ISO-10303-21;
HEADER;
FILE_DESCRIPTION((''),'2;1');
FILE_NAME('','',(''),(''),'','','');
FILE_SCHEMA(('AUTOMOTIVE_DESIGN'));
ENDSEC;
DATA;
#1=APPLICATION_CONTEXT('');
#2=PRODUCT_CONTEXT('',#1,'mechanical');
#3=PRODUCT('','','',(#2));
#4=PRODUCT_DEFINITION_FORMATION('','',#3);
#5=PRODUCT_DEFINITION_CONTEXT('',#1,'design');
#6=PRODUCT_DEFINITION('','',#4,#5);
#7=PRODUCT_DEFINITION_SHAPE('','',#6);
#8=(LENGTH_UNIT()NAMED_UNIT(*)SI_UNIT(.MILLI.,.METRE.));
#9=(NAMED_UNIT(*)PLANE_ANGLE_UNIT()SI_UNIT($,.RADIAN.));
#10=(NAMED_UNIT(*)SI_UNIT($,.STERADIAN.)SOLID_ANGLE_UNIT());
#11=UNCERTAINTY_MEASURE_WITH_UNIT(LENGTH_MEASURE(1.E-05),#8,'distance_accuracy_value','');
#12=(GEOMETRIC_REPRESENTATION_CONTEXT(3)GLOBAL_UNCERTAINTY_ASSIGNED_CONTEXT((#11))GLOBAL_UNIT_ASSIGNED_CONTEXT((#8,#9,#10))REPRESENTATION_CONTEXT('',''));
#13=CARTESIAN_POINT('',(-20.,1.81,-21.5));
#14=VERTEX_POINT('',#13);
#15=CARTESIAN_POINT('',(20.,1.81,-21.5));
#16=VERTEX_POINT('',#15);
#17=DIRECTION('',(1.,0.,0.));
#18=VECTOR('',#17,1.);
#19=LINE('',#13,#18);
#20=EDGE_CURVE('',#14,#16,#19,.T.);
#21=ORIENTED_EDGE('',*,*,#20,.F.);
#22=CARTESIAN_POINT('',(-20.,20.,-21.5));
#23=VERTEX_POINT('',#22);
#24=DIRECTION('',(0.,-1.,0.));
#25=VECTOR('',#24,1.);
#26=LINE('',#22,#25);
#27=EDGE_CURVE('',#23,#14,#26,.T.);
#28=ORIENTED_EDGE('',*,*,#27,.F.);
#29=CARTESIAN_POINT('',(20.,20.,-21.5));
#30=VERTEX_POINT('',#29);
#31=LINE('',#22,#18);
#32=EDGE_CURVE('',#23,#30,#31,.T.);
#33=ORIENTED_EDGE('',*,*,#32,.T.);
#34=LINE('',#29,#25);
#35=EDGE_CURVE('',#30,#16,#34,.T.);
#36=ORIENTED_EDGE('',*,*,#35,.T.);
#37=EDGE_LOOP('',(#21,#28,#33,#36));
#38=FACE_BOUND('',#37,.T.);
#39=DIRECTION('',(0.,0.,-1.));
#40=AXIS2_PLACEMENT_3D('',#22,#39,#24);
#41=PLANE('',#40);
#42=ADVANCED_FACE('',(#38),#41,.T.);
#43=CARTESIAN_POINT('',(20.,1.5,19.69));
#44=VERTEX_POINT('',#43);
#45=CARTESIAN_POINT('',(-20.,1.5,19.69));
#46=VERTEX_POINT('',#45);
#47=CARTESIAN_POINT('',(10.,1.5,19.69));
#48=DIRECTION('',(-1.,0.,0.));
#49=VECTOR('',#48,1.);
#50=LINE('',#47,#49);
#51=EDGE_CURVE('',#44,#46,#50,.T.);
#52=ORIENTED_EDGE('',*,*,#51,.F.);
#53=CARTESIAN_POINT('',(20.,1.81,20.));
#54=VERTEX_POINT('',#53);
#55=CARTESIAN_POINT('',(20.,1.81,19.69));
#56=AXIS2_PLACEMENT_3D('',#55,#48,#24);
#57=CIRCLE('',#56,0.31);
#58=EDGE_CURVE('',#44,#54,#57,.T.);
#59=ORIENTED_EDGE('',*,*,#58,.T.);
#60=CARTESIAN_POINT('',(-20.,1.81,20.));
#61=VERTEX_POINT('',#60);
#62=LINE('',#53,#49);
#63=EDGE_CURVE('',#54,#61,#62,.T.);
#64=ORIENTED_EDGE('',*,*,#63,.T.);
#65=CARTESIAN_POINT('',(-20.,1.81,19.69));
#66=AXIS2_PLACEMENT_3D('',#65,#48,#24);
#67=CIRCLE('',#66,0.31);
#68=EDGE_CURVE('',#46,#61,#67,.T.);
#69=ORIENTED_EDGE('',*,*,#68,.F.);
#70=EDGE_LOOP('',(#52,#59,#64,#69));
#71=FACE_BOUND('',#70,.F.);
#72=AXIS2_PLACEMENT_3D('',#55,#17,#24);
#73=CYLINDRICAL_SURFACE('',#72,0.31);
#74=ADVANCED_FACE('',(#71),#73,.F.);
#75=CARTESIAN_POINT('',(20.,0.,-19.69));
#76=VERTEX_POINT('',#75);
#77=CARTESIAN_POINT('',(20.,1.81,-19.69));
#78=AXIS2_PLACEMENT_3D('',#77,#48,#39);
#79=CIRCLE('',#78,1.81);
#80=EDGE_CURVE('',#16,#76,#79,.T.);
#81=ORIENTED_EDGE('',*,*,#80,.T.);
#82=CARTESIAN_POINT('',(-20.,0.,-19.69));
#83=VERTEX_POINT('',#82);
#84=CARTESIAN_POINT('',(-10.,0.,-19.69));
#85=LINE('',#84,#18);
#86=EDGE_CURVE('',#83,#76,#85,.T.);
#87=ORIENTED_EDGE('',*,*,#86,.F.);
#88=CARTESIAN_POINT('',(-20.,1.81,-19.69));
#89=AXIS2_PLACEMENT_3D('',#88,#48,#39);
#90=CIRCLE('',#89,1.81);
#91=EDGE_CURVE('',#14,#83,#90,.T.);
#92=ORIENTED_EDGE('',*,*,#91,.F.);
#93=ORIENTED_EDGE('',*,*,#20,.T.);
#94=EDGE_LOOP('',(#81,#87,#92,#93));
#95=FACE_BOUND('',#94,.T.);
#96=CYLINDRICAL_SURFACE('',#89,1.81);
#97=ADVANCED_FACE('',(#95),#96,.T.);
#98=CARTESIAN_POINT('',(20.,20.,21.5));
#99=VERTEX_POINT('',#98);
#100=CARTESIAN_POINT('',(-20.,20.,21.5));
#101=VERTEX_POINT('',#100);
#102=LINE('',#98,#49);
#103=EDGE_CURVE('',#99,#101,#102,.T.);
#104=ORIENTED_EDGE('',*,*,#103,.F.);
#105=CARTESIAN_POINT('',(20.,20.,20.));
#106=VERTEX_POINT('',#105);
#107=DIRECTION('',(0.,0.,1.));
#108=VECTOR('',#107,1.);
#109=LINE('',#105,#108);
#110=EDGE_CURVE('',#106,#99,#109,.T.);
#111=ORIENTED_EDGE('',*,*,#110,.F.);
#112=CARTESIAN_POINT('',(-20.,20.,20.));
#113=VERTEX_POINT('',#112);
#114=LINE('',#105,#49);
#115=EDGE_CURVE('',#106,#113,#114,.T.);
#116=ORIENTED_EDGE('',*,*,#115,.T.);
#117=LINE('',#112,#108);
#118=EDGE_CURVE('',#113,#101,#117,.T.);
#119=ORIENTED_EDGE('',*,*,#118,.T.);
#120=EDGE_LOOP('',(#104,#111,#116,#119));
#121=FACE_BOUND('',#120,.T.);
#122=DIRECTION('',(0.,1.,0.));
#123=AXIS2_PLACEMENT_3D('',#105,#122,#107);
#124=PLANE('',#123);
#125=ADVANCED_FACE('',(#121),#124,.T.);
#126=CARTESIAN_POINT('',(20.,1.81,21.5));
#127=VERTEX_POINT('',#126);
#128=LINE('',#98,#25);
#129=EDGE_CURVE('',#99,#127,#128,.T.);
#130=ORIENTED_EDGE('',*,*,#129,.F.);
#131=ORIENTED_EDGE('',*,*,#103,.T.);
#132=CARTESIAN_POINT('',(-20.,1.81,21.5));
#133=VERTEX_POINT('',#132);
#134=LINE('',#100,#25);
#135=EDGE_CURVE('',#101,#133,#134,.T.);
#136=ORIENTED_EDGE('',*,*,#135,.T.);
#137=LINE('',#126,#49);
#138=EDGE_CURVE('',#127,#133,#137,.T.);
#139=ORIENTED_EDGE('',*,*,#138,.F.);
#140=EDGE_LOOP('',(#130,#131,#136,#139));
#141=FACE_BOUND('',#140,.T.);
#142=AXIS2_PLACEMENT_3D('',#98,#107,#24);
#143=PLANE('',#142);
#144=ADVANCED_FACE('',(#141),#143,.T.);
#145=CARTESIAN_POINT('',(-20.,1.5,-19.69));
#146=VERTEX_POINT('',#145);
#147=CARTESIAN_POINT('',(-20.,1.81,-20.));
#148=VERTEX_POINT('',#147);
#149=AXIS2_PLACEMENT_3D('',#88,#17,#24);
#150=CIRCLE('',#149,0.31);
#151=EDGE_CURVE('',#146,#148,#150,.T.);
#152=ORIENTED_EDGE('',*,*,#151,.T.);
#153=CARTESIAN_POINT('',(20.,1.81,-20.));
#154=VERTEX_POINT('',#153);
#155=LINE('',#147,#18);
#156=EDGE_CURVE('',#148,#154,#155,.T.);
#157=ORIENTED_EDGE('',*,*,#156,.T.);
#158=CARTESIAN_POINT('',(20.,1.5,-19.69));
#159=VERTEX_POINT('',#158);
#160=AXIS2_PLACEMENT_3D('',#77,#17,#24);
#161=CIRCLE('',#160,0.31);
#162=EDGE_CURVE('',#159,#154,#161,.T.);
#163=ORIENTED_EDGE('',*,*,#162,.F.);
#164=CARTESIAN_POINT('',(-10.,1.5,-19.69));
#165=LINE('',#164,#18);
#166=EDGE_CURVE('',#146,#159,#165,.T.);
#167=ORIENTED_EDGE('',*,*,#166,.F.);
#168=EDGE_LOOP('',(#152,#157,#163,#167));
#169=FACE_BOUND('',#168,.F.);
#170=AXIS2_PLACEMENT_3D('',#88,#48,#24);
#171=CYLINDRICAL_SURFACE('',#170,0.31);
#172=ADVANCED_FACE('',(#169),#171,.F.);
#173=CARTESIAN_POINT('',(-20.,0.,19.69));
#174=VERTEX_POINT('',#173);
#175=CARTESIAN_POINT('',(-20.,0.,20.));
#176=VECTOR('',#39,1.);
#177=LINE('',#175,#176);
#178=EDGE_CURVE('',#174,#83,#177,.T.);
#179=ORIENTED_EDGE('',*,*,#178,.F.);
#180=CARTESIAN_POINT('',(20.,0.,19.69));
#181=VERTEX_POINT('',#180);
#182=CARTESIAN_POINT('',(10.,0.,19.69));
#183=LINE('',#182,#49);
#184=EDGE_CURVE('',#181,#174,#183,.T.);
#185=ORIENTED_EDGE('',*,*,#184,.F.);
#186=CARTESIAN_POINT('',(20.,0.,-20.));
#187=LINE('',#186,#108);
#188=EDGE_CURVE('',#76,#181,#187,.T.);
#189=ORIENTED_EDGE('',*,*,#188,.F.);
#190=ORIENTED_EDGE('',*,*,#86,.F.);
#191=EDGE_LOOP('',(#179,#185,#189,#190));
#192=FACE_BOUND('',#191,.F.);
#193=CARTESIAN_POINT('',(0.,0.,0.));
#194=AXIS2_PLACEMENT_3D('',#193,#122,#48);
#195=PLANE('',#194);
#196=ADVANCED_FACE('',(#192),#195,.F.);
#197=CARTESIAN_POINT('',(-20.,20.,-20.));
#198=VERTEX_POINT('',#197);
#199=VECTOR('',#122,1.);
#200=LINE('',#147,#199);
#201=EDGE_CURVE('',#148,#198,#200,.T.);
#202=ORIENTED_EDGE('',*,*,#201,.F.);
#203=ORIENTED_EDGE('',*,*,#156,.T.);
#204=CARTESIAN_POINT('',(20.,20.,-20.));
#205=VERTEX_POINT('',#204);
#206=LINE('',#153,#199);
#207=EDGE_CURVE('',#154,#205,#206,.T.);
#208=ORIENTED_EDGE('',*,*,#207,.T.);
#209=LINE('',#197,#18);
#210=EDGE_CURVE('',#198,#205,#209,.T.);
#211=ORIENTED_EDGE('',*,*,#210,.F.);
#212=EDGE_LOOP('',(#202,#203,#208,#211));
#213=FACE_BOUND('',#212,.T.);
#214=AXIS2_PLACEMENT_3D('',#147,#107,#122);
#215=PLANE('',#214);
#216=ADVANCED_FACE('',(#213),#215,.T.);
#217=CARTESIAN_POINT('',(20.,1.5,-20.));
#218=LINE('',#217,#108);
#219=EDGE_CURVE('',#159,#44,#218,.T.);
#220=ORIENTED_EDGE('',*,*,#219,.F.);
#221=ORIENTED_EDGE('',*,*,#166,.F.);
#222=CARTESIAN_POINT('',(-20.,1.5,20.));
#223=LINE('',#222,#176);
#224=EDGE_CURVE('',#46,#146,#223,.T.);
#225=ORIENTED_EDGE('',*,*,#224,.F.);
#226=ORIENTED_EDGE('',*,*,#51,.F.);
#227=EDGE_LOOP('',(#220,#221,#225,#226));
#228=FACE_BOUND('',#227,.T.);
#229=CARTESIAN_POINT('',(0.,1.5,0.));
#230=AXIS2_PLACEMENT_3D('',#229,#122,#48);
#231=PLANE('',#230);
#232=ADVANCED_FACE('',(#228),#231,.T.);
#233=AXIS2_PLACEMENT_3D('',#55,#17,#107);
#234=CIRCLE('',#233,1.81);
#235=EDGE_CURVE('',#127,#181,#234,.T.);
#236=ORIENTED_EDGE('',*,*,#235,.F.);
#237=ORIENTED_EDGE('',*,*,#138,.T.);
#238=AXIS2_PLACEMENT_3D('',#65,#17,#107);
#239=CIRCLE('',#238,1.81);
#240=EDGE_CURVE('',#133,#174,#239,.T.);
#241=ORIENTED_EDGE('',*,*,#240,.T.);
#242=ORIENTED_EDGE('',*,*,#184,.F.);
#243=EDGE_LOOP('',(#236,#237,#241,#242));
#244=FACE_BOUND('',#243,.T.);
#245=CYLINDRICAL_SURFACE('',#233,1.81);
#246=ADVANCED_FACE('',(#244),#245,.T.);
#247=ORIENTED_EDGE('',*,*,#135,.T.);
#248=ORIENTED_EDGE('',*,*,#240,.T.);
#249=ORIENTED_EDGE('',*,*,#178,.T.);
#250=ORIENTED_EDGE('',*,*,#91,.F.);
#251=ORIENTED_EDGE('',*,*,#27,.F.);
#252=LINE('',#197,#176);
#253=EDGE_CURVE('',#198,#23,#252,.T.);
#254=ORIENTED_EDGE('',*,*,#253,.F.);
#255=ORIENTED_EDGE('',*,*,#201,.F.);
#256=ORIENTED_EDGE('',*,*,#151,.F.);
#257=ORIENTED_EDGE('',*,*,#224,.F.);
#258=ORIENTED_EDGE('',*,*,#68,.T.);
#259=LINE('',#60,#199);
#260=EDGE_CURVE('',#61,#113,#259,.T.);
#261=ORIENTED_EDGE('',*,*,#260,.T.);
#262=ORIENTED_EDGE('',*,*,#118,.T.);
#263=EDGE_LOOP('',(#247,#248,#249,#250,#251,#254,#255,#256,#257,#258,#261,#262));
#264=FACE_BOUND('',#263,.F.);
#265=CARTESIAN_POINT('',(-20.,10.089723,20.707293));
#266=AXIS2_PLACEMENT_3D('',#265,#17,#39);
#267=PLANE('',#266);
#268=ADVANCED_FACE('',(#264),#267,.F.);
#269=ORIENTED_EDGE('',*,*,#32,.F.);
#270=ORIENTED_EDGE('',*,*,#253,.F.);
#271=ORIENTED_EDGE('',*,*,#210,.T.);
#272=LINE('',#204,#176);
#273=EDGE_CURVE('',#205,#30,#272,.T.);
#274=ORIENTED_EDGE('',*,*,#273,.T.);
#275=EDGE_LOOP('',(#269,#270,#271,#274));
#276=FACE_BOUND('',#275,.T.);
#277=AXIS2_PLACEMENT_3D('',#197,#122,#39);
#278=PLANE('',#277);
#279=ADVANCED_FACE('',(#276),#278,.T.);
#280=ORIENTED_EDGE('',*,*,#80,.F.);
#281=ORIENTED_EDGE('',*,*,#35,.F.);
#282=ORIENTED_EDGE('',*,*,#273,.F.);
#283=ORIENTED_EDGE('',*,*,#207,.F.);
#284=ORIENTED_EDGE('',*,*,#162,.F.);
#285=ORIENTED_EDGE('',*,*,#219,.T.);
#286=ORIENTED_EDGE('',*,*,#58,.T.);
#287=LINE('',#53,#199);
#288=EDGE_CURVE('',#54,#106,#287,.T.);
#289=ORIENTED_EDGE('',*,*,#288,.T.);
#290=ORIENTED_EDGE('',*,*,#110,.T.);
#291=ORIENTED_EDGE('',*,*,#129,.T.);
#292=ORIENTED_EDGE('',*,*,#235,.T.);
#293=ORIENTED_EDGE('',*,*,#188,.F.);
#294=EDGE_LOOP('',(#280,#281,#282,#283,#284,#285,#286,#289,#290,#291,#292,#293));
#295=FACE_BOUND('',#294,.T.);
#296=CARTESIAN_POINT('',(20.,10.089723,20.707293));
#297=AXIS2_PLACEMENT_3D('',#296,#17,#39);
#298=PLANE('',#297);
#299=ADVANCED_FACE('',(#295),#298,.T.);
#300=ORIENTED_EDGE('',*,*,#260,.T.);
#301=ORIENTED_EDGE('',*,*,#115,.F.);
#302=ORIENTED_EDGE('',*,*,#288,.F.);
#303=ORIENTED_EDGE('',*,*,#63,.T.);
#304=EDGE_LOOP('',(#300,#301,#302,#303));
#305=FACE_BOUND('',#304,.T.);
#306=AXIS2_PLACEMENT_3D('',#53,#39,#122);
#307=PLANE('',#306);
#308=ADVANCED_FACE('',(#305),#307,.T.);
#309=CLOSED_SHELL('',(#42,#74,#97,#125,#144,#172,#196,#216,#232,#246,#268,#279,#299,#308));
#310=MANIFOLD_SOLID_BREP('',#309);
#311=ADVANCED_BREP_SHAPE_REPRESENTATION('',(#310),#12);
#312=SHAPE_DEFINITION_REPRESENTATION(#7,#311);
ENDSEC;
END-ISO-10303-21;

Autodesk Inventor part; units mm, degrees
ref_plane "YZ Plane" through (0, 0, 0) normal (1, 0, 0) x (0, 1, 0)
ref_plane "XZ Plane" through (0, 0, 0) normal (0, 1, 0) x (-1, 0, 0)
ref_plane "XY Plane" through (0, 0, 0) normal (0, 0, 1) x (1, 0, 0)
sketch "Sketch1" plane through (0, 0, 0) normal (0, 1, 0) x (-1, 0, 0)
  line L0 (-20, 20) -> (20, 20)
  line L1 (20, 20) -> (20, -20)
  line L2 (20, -20) -> (-20, -20)
  line L3 (-20, -20) -> (-20, 20)
  line L4 (-20, 20) -> (20, -20) construction
  line L5 (20, 20) -> (-20, -20) construction
  point P0 (0, 0)
  dimension "d0" = 40
  dimension "d1" = 40
extrude "Plate1" add sketch "Sketch1" along normal blind 1.5
sketch "Sketch2" plane through (20, 0, 21.5) normal (0, 0, -1) x (-1, 0, 0)
  line L0 (40, 0) -> (0, 0)
  line L1 (0, 0) -> (0, 20)
  line L2 (0, 20) -> (40, 20)
  line L3 (40, 20) -> (40, 0)
edge flange "Flange1" height 20 angle 90 thickness 1.5 bend radius 0.31 thickness toward (0, 0, -1) relief tear relief width 1.5 relief depth 0.75 corner gap 0.31 corner form 0 edges at (0, 1.5, 20) (0, 1.5, -20) wall of the first edge with corners at (-20, 0, 21.5) (20, 0, 21.5) (20, 20, 21.5) (-20, 20, 21.5)
bend "Bend1"
corner "Corner1"
equation "\"d2\" = Thickness"
equation "\"d3\" = BendReliefWidth"
equation "\"d4\" = BendReliefDepth"
equation "\"d5\" = MinimumRemnant"
equation "\"d6\" = TransitionRadius"
equation "\"d9\" = BendRadius"
equation "\"d10\" = CornerReliefSize"
equation "\"d11\" = GapSize"
equation "\"d12\" = JacobiRadiusSize"
equation "\"BendReliefWidth\" = Thickness"
equation "\"BendReliefDepth\" = 0.5 * Thickness"
equation "\"CornerReliefSize\" = 4 * Thickness"
equation "\"MinimumRemnant\" = 2 * Thickness"
equation "\"TransitionRadius\" = BendRadius"
equation "\"JacobiRadiusSize\" = BendRadius"
equation "\"GapSize\" = Thickness"
equation "\"Thickness\" = 1.5"
equation "\"BendRadius\" = 0.31"
properties part number "axis_20_bottom_frame" material "Aluminum 6061-AHC"
